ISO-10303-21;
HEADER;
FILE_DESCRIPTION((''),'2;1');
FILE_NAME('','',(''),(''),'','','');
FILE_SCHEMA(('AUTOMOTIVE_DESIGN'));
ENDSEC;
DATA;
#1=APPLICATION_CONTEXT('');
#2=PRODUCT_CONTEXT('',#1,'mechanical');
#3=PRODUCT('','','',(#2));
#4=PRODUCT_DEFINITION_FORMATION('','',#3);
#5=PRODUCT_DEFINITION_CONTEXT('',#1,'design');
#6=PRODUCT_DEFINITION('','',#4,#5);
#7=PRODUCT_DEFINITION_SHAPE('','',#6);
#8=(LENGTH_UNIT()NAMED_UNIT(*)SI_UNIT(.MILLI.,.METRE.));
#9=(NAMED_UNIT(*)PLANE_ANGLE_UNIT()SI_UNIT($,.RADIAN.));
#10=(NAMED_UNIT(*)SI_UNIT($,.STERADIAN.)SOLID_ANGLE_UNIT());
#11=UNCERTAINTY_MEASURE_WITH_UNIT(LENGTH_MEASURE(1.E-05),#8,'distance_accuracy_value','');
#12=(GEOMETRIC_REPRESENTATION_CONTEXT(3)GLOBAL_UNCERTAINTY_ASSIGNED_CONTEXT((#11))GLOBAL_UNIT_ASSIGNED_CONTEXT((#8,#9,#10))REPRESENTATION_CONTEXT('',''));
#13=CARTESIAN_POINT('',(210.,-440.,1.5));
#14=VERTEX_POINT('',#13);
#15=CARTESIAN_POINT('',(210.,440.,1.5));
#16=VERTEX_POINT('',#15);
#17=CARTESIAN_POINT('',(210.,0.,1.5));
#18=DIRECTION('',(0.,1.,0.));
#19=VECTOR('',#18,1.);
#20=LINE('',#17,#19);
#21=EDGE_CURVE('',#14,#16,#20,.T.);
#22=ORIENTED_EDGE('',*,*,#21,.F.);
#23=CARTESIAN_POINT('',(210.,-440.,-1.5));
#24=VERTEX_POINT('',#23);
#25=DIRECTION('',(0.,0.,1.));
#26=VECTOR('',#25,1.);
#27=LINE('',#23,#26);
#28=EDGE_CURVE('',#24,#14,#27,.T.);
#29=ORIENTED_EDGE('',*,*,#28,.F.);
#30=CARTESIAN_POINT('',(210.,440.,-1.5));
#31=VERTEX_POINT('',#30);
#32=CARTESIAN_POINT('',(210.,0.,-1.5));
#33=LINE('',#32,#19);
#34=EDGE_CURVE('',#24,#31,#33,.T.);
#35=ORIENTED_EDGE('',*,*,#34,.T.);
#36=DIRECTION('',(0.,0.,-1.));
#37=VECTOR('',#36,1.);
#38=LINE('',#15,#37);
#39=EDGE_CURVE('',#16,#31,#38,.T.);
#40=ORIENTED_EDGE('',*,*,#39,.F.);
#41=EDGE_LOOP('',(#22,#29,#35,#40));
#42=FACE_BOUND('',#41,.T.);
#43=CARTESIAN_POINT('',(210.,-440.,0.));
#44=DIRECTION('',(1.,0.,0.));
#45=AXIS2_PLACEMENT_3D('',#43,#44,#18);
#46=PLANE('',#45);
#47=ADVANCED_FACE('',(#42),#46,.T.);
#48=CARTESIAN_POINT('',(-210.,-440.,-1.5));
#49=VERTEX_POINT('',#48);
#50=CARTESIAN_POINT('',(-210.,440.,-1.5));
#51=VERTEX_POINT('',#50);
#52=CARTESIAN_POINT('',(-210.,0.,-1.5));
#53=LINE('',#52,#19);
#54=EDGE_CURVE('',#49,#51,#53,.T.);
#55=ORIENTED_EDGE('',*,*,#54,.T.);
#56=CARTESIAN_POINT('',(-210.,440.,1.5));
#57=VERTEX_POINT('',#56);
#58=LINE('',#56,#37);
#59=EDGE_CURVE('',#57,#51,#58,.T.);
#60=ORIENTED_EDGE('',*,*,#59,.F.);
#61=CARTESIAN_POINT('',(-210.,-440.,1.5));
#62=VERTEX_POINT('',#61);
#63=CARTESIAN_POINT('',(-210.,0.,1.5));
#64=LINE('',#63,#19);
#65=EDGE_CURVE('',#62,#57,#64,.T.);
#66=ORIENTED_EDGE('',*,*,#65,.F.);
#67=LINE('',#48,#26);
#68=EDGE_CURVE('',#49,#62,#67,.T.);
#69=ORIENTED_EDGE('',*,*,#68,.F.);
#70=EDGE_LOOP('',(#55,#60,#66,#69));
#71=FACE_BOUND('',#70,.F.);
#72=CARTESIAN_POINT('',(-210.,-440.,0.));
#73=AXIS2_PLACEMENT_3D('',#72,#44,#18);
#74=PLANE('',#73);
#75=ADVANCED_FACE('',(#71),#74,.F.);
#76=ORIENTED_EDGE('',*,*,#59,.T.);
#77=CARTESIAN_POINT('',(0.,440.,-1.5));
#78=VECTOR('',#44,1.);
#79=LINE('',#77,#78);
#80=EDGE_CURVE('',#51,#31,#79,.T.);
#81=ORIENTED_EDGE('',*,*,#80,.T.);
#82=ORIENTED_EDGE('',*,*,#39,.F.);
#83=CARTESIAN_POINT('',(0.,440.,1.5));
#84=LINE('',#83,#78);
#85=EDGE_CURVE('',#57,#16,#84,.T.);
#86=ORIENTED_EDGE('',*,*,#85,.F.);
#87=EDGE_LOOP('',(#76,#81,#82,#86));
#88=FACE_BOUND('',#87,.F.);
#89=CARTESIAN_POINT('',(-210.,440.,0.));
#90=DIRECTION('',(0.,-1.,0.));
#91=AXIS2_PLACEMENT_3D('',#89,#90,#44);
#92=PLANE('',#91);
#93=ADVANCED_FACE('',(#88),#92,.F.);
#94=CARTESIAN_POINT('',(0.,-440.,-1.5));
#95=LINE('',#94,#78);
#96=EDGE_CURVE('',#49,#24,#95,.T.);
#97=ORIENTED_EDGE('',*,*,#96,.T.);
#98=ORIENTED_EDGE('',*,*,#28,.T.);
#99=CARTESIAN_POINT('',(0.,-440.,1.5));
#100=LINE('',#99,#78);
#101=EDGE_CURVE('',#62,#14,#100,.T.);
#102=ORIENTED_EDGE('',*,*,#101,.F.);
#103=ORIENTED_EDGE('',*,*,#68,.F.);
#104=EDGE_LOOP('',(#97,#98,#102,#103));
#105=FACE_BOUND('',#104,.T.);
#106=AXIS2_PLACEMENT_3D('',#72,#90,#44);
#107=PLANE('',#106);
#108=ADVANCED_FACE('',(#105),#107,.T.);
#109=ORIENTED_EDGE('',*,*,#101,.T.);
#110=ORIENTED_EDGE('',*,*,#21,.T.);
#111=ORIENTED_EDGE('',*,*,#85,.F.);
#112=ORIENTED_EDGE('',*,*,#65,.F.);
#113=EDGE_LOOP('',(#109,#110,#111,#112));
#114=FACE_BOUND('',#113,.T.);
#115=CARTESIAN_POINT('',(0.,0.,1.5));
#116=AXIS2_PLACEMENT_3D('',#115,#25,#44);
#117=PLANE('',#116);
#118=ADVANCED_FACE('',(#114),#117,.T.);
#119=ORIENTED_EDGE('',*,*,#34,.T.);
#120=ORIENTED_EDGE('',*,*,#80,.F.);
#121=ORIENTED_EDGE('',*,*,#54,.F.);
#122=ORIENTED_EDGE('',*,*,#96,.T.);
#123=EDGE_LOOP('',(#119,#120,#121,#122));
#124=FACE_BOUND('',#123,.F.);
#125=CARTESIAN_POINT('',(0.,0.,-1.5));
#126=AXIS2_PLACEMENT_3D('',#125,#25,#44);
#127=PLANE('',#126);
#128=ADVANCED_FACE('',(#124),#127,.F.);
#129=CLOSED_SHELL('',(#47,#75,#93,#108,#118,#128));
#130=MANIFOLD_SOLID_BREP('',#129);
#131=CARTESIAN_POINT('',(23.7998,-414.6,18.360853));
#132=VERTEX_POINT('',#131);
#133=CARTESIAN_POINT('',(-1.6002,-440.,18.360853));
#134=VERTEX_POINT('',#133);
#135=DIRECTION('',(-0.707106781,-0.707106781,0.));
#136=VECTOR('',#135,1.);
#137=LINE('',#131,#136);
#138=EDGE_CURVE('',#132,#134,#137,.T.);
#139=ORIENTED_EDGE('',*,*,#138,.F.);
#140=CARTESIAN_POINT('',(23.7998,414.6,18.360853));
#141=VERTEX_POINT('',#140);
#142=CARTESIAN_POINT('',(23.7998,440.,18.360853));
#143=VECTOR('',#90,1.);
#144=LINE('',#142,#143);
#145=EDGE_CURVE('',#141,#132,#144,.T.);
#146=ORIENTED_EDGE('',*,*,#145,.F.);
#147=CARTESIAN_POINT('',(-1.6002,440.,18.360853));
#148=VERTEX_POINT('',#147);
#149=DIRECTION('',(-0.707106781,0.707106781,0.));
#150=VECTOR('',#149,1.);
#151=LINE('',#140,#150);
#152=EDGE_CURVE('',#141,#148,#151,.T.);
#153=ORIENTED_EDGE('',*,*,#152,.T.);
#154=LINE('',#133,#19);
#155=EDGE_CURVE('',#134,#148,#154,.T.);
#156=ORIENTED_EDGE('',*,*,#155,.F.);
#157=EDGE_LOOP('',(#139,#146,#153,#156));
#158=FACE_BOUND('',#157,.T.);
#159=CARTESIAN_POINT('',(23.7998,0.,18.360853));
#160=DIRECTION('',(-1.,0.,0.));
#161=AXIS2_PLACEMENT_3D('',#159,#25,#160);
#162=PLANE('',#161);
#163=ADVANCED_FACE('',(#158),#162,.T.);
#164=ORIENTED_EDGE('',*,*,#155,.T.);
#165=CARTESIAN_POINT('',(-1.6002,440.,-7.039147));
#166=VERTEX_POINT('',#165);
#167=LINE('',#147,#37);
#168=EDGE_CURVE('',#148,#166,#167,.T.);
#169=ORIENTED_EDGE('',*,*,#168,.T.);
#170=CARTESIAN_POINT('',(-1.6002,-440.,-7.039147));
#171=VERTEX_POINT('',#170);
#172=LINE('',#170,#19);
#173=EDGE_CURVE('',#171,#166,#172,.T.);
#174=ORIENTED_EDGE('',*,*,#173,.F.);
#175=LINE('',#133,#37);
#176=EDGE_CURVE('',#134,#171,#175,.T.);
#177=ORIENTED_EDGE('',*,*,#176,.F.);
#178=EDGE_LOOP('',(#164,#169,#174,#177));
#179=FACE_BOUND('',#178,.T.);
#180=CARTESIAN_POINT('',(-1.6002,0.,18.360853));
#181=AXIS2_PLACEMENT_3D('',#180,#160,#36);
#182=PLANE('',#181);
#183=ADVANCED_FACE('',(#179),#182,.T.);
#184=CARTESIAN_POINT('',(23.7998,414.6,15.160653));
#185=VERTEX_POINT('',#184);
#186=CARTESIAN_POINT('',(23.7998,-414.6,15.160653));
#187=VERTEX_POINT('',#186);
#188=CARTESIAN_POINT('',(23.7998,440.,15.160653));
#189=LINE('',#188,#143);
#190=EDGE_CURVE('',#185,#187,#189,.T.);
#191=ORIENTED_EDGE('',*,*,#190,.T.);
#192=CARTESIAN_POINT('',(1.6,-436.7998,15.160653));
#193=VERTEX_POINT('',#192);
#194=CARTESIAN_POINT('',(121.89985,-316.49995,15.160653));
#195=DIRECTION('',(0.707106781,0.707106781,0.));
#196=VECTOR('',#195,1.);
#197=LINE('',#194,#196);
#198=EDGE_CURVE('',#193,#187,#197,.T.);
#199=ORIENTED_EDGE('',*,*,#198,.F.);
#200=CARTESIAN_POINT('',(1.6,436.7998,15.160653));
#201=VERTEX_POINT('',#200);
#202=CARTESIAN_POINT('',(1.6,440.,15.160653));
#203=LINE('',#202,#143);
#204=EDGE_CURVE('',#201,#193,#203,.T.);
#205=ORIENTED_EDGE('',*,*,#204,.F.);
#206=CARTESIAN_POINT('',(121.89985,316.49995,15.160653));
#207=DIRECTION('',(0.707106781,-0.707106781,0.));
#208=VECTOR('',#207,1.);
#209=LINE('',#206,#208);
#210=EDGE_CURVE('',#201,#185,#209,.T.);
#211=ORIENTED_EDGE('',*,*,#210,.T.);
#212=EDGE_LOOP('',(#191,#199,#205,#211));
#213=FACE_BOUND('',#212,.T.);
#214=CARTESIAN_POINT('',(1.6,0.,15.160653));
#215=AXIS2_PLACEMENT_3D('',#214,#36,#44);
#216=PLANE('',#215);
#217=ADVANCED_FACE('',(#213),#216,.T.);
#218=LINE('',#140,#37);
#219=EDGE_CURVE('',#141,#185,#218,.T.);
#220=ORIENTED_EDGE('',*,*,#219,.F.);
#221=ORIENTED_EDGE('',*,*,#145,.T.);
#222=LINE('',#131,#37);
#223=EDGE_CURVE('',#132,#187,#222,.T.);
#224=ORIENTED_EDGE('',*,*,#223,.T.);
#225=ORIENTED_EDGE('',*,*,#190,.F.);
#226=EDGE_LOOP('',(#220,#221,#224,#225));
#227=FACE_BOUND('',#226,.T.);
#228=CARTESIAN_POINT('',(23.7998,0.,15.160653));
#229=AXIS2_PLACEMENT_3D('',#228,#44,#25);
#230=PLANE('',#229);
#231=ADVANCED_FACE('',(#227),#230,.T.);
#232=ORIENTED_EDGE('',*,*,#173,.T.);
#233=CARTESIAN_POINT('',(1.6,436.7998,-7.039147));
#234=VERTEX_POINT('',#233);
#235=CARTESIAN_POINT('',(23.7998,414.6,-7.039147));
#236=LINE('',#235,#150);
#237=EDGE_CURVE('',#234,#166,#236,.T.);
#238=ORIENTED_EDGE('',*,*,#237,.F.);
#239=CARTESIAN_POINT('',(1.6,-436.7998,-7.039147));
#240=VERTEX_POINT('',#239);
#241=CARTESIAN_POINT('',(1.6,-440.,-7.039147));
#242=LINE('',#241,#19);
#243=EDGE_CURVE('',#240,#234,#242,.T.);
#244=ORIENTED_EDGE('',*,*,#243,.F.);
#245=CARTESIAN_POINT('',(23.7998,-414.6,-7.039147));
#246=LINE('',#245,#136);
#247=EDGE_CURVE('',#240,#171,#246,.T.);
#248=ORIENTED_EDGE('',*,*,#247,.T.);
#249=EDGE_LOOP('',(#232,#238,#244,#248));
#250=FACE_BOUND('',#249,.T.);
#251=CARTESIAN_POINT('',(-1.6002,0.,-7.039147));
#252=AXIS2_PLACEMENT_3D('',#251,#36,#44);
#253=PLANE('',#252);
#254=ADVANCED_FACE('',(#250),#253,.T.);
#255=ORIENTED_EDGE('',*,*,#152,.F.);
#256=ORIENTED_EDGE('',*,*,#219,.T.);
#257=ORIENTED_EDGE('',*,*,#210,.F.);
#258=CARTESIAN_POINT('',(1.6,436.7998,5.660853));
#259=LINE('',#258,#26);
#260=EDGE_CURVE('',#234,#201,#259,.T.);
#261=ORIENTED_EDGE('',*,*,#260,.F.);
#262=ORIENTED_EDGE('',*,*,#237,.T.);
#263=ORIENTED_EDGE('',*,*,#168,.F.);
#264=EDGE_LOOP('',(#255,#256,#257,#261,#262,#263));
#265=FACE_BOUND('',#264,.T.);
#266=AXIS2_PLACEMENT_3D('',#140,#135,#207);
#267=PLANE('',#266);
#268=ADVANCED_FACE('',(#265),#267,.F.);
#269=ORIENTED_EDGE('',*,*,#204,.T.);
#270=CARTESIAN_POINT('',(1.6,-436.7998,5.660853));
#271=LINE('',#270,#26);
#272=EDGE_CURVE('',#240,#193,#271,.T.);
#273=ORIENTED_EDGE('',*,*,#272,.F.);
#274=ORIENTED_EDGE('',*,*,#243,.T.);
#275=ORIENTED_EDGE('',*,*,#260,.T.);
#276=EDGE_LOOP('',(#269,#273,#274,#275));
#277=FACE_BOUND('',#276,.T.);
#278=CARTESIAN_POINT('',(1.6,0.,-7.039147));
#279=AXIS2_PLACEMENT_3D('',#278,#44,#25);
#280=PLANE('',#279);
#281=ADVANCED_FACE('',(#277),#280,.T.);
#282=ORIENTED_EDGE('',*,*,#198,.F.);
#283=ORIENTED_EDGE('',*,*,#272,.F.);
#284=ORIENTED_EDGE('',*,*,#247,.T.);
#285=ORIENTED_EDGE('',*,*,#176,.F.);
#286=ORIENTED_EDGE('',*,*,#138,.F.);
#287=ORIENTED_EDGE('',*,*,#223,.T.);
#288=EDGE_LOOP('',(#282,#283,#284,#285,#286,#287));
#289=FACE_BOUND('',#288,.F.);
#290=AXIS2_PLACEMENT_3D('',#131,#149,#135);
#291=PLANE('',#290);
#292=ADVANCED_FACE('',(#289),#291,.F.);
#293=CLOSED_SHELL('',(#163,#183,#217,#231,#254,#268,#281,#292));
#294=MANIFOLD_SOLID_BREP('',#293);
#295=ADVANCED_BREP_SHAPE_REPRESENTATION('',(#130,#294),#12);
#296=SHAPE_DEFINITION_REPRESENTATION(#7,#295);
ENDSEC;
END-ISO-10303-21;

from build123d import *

# Parameters (mm, degrees)
F1_DEPTH = 440
F3_DEPTH = 25.4
F4_W     = 420
F4_H     = 880
F5_DEPTH = 1.5


# Not quite as in the source:
# - a pattern or mirror of a feature is missing from the dataset's text; its kind, count and spacing are read off the source's solid


with BuildPart() as f1:
    # F0 (on Front) → F1 (new body, symmetric)
    with BuildSketch(Plane.XZ):
        Polygon((1.6, -7.0391468048), (1.6, 15.1606531952), (23.7998, 15.1606531952), (23.7998, 18.3608531952), (-1.6002, 18.3608531952), (-1.6002, -7.0391468048), align=None)
    extrude(amount=F1_DEPTH, both=True)

    # F2 (on face) → F3 (cut)
    with BuildSketch(Plane.XY.offset(18.3608531952)):
        Polygon((23.7998, -414.6), (-1.6002, -440), (23.7998, -440), align=None)
    f3 = extrude(amount=-F3_DEPTH, mode=Mode.SUBTRACT)

    # F3_copies: F3 across plane
    add(f3.mirror(Plane.ZX), mode=Mode.SUBTRACT)


with BuildPart() as f5:
    # F4 (on Top) → F5 (new body, symmetric)
    with BuildSketch(Plane.XY):
        Rectangle(F4_W, F4_H)
    extrude(amount=F5_DEPTH, both=True)


solid = Compound([f1.part, f5.part])
